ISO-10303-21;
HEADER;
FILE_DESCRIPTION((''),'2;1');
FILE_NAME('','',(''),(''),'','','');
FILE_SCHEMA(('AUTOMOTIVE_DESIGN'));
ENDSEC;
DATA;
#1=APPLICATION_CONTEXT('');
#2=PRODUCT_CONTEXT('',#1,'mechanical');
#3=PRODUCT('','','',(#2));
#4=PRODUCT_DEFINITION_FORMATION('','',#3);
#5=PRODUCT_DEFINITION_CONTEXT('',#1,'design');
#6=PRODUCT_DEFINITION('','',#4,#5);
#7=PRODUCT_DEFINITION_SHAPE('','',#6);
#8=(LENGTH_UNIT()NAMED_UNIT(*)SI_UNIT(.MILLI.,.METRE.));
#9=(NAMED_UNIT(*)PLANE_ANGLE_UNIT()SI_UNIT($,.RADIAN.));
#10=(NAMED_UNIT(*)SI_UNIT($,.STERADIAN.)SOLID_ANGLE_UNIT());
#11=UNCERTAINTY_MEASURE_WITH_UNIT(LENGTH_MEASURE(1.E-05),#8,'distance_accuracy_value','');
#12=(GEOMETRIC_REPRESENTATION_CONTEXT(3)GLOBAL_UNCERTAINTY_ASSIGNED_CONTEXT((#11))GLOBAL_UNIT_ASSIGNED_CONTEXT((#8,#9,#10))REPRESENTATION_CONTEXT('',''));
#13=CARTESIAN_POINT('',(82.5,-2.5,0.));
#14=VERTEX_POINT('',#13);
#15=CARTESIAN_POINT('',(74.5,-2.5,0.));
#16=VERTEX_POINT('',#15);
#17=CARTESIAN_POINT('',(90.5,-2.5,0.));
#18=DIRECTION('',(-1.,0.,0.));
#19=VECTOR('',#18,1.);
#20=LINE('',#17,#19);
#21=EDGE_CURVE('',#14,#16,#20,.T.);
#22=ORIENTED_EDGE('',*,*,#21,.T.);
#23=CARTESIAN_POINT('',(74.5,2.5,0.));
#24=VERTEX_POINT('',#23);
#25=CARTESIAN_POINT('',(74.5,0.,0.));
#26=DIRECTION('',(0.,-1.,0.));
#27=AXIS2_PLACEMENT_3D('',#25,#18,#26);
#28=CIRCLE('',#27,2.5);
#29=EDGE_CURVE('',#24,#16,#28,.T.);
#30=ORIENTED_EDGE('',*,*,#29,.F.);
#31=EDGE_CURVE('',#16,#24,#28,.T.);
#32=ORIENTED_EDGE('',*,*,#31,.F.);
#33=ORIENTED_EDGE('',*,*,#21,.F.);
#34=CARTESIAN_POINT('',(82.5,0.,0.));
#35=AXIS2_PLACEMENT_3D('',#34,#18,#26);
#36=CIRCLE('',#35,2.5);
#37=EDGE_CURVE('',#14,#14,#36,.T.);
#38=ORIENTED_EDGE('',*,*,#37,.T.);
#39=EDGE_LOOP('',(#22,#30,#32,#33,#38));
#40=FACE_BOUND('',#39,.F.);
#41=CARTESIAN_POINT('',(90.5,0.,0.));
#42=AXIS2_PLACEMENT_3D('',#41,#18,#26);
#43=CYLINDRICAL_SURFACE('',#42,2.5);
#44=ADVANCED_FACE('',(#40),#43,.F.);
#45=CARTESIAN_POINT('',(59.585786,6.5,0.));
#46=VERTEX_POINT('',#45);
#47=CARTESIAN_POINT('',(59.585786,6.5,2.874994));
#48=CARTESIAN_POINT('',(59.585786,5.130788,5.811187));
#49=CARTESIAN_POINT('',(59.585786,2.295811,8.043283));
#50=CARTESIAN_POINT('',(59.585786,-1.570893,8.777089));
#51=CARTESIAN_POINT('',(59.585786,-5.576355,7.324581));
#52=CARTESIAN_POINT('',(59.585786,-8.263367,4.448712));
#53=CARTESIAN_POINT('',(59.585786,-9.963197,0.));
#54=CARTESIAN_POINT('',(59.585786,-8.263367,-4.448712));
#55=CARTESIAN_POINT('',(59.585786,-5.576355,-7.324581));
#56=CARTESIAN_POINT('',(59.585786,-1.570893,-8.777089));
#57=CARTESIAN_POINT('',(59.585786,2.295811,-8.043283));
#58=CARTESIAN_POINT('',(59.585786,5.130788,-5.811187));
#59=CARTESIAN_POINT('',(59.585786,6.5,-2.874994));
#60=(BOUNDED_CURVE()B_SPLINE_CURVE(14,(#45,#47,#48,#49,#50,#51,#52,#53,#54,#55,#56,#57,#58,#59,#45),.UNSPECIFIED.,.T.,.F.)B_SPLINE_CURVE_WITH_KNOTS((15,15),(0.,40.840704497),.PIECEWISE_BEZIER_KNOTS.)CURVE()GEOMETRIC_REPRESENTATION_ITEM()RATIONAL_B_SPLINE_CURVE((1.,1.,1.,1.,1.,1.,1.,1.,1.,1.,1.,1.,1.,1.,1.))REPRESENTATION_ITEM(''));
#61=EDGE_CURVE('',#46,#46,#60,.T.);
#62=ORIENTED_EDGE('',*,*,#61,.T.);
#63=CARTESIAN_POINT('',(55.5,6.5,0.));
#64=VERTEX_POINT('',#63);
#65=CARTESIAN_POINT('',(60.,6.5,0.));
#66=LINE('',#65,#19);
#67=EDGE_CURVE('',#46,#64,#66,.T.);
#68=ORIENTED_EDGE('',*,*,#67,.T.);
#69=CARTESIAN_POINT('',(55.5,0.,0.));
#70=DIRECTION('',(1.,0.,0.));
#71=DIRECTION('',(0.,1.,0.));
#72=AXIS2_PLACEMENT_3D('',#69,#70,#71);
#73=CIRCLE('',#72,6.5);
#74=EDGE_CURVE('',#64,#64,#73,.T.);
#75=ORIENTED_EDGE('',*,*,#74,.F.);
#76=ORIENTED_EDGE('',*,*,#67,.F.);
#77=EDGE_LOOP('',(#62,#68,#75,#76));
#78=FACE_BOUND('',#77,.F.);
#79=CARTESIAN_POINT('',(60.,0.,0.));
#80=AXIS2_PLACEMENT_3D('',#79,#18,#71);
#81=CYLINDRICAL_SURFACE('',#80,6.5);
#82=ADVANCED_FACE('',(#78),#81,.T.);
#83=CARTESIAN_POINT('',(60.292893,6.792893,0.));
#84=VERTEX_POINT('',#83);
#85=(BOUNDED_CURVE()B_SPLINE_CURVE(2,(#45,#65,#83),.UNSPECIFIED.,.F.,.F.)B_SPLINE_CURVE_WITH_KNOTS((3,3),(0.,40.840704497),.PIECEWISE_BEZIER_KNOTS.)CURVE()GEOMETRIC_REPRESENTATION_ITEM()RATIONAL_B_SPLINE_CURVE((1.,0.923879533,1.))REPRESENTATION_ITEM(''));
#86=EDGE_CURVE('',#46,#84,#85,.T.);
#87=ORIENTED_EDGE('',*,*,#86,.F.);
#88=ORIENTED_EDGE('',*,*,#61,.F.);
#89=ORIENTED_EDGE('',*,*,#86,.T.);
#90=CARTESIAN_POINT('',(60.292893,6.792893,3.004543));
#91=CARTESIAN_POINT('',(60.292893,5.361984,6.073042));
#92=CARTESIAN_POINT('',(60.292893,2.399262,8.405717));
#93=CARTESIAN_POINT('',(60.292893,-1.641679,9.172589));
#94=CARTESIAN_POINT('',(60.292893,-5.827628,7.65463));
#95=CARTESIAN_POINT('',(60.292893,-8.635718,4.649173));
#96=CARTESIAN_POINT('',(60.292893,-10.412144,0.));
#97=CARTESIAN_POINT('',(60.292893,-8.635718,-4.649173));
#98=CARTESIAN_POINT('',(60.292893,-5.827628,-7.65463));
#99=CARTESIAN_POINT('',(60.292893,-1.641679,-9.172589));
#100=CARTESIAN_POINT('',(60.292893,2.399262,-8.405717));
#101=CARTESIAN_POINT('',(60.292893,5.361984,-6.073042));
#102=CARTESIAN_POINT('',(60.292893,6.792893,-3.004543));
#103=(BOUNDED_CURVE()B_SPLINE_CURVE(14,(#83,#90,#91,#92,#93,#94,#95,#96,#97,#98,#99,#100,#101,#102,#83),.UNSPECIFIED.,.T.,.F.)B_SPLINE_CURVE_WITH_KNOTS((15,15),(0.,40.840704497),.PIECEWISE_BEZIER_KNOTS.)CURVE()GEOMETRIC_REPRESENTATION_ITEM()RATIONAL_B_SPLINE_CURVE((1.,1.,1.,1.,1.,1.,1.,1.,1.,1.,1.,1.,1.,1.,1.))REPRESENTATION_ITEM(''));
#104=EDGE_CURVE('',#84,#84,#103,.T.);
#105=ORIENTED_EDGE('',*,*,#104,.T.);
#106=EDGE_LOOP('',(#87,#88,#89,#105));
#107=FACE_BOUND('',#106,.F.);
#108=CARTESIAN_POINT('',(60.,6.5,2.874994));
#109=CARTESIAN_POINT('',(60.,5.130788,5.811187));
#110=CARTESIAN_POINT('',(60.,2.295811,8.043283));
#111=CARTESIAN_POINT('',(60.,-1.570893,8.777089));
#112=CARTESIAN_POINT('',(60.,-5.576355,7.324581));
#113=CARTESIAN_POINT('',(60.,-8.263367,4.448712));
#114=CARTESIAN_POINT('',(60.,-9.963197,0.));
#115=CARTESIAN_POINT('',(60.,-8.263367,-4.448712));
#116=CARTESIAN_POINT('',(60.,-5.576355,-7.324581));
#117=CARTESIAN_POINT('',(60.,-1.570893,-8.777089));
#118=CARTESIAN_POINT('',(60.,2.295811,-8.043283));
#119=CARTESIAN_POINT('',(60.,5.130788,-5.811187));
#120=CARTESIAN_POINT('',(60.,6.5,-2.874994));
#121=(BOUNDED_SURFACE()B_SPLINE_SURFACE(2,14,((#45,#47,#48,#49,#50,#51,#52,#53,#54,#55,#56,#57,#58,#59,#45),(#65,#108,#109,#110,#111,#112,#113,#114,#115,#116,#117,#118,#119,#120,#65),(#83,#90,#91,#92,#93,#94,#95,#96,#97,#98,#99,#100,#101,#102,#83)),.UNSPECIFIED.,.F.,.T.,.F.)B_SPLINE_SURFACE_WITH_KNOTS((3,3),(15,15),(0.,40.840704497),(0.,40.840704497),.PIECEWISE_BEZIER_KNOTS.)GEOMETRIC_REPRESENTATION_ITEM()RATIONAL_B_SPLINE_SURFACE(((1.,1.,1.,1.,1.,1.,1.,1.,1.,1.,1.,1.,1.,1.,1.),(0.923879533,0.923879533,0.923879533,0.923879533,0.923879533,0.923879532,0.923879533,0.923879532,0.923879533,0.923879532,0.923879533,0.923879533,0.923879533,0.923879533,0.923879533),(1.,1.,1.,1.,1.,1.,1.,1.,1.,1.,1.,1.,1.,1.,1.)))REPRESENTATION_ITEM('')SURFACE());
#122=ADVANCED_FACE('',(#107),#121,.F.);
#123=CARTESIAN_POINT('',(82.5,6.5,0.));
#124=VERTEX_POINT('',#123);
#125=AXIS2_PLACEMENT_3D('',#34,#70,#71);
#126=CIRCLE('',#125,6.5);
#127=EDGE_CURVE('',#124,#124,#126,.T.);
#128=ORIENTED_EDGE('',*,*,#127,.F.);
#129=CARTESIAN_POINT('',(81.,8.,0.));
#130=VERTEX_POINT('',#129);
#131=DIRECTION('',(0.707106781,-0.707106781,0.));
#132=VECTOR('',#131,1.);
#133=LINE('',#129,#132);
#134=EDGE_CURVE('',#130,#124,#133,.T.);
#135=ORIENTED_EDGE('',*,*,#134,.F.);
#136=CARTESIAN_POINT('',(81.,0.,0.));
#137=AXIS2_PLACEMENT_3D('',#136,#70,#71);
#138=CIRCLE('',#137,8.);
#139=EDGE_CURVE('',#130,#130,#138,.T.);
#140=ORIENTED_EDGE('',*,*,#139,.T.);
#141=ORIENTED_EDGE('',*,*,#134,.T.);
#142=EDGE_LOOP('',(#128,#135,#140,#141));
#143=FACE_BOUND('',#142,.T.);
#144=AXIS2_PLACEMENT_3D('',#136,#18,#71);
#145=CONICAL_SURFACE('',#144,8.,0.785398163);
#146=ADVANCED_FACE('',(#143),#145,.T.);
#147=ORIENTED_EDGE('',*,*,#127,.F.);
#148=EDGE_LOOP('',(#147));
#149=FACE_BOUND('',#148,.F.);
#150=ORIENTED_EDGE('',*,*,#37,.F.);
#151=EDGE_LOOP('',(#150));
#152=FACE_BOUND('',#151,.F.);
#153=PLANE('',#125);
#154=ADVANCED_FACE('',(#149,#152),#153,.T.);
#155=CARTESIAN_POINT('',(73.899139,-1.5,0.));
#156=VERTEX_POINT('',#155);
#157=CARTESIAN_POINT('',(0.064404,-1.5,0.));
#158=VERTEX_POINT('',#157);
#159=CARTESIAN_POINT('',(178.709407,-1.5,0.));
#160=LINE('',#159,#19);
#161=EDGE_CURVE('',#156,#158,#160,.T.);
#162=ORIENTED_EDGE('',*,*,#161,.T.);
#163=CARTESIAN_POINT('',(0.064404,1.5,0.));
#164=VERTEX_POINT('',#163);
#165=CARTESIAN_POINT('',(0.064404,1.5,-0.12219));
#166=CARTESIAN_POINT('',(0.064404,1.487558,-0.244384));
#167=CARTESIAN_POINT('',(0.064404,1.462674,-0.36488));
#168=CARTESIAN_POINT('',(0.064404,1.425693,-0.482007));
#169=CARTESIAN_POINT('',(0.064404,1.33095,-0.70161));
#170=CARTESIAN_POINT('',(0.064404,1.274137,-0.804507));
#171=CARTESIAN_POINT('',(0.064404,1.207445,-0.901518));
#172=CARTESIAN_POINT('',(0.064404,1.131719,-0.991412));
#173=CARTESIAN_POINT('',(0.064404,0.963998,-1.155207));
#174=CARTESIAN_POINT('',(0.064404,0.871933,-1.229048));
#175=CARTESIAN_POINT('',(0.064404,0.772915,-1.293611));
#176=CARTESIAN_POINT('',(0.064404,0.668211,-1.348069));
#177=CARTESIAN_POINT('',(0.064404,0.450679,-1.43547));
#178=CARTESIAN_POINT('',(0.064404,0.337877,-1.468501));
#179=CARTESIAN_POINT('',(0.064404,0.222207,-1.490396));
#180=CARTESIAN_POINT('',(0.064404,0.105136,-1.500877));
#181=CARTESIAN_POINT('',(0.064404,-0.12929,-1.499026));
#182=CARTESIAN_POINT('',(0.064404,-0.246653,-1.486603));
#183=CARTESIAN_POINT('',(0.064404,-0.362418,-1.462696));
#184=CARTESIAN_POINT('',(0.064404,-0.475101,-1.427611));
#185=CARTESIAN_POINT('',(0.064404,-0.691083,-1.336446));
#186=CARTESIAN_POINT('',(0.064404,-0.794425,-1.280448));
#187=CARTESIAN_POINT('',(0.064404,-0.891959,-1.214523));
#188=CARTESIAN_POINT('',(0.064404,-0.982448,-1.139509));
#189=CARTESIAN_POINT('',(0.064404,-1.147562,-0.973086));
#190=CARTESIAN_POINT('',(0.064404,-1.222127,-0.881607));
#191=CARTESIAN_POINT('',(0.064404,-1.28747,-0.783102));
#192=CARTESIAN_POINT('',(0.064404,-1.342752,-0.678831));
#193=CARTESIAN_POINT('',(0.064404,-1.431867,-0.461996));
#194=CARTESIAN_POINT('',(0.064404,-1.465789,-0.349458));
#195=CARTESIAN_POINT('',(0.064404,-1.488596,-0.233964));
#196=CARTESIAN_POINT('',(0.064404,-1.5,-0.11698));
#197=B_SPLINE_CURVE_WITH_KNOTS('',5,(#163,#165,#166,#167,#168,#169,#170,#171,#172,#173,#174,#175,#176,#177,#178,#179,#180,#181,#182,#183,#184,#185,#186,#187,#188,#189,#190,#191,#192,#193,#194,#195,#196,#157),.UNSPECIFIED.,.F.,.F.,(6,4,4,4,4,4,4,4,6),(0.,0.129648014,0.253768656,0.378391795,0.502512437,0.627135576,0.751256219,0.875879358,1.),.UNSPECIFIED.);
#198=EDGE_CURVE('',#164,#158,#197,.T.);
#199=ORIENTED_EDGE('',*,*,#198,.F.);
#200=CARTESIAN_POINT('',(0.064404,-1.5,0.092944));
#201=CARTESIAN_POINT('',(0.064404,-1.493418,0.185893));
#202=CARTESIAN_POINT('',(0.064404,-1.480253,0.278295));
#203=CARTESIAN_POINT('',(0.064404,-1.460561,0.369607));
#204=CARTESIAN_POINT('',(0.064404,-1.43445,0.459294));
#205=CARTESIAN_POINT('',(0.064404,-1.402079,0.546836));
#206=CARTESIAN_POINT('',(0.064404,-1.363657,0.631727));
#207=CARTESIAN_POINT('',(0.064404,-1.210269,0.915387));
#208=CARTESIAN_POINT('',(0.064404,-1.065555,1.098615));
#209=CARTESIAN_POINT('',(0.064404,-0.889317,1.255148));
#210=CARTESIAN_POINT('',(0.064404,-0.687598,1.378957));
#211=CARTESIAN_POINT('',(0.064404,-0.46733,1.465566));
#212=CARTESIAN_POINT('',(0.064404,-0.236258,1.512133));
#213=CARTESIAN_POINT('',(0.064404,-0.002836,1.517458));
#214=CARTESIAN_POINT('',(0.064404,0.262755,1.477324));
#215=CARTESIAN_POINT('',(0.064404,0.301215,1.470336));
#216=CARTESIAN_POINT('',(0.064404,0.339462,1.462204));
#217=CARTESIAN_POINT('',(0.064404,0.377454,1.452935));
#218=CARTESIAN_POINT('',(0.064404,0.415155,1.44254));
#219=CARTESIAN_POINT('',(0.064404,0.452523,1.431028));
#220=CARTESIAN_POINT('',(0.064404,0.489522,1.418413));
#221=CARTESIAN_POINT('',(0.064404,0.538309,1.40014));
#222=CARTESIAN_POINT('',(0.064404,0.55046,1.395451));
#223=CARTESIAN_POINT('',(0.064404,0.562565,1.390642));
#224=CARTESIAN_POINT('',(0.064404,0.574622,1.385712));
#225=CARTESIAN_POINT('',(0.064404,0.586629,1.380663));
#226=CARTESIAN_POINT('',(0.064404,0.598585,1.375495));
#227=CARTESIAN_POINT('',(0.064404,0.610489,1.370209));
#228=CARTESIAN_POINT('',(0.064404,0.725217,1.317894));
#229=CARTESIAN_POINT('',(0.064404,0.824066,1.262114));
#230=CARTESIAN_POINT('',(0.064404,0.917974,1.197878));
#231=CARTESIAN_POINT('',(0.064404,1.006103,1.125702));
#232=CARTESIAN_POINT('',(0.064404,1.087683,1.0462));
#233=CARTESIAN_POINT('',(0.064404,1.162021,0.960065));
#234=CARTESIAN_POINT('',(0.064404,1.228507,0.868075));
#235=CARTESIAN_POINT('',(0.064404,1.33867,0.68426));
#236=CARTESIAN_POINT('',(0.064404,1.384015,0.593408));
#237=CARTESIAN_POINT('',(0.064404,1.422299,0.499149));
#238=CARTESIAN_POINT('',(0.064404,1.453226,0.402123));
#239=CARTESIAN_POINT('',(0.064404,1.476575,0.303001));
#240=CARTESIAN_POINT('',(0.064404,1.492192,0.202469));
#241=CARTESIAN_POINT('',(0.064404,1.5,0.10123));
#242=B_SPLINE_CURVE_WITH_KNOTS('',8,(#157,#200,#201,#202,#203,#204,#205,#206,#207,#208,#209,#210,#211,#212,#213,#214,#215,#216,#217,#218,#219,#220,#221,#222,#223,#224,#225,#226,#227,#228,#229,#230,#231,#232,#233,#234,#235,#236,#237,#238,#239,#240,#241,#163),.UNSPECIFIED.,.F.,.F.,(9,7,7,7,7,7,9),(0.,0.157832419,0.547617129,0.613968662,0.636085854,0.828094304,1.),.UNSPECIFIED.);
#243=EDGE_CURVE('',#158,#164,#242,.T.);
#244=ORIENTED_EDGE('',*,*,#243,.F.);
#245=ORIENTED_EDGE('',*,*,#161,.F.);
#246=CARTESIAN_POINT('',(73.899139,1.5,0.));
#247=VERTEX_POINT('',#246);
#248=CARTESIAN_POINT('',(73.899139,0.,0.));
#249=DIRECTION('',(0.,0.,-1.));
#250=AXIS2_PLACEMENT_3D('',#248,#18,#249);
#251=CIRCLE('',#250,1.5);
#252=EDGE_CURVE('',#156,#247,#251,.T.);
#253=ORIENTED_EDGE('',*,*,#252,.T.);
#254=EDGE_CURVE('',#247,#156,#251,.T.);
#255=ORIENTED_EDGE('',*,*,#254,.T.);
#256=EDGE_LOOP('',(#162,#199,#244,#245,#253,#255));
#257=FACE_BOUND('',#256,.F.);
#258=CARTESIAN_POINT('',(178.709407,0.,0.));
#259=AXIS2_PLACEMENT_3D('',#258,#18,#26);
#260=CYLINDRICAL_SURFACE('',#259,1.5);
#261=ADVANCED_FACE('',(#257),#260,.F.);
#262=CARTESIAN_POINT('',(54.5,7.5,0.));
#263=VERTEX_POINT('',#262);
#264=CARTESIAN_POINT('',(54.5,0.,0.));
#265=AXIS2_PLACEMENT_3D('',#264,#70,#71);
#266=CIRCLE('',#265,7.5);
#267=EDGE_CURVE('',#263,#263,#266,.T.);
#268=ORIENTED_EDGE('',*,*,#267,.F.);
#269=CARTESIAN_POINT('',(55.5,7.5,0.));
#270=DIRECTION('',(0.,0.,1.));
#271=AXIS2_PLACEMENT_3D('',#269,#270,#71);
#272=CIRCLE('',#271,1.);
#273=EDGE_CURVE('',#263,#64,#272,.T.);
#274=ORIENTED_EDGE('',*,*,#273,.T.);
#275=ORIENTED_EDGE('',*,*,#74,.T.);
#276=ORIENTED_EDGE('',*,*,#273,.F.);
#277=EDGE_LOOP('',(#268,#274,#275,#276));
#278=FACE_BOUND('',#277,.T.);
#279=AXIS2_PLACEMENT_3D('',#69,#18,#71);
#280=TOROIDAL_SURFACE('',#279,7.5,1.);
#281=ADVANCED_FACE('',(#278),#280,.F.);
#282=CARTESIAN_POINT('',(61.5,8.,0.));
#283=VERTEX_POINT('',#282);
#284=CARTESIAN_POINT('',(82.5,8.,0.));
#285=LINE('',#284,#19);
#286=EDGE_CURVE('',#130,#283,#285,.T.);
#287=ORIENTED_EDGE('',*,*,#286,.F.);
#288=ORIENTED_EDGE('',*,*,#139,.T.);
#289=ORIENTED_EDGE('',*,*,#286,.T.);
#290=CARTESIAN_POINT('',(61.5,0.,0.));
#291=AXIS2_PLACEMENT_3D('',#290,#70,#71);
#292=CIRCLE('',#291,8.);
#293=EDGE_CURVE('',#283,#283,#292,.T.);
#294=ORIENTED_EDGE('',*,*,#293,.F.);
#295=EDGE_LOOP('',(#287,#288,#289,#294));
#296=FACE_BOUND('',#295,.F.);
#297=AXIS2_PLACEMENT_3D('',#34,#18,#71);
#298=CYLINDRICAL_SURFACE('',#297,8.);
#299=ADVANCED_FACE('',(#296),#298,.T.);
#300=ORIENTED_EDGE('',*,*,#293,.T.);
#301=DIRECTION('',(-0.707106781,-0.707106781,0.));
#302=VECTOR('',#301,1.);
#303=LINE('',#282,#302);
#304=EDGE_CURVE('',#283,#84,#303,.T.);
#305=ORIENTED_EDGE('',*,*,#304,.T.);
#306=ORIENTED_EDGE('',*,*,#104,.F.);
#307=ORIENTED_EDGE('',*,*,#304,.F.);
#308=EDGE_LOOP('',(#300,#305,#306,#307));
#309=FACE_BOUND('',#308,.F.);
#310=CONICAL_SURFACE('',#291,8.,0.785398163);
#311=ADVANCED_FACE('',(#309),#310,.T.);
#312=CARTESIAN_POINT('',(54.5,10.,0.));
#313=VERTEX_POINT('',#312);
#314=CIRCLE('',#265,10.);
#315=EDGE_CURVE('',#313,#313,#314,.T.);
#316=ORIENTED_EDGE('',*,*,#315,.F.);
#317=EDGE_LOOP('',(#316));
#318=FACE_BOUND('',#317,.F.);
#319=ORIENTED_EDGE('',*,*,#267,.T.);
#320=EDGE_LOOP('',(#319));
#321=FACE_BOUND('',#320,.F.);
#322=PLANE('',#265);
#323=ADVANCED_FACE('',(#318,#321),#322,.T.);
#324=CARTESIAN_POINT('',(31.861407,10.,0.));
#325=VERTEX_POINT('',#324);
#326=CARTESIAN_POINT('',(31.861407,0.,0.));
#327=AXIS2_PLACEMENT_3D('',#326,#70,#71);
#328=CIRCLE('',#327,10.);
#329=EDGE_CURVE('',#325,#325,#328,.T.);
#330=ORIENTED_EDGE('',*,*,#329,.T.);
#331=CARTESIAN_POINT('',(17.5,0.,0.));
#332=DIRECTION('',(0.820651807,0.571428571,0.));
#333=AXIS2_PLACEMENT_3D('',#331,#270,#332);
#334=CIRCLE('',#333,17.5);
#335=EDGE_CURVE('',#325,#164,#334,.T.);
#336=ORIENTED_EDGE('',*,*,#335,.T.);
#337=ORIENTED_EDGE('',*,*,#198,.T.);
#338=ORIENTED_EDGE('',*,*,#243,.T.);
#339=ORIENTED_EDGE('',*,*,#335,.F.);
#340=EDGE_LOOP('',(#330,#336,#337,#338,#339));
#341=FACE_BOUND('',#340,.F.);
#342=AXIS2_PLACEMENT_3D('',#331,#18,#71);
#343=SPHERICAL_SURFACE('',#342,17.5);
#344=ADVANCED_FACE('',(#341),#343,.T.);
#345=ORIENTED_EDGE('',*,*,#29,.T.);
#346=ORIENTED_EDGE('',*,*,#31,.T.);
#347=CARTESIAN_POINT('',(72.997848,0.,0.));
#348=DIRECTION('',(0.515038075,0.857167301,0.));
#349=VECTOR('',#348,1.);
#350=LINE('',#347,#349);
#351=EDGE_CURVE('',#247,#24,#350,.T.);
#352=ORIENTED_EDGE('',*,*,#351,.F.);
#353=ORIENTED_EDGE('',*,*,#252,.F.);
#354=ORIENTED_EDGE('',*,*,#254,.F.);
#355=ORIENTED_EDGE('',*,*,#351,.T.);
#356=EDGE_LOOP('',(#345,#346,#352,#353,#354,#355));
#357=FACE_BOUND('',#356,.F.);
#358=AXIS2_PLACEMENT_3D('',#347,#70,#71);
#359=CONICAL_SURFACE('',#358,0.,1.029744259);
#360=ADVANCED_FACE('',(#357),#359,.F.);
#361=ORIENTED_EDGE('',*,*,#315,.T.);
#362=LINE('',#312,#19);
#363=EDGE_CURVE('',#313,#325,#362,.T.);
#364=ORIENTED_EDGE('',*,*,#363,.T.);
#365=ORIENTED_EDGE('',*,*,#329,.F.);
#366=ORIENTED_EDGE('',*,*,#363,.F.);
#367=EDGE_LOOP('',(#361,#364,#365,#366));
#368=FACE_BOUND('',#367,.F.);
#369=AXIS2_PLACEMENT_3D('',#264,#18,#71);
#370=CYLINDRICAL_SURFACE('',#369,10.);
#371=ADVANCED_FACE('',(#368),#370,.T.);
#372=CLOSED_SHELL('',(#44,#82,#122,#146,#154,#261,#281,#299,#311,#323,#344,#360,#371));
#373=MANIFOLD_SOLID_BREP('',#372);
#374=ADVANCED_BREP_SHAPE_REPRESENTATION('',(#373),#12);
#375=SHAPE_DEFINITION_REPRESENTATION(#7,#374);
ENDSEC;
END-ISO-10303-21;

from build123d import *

# Parameters (mm, degrees)
F3_D     = 5
F3_DEPTH = 8
F3_TIP   = 1.5021515476
F4_D     = 3
F5_R     = 1
F6_SIZE  = 1.5


with BuildPart() as f1:
    # F0 (on Top) → F1 (revolve)
    with BuildSketch(Plane.XY):
        with BuildLine():
            ThreePointArc((31.8614066163, 10), (12.2595141345, 16.6969251029), (0, 0))
            Line((0, 0), (82.5, 0))
            Line((82.5, 0), (82.5, 8))
            Line((82.5, 8), (61.5, 8))
            Line((61.5, 8), (60, 6.5))
            Line((60, 6.5), (54.5, 6.5))
            Line((54.5, 6.5), (54.5, 10))
            Line((54.5, 10), (31.8614066163, 10))
        make_face()
    revolve(axis=Axis((41.25, 0, 0), (1, 0, 0)))

    # F3
    with Locations(Plane.YZ.offset(82.5)):
        with Locations((0, 0)):
            Hole(F3_D / 2, depth=F3_DEPTH)
            with Locations((0, 0, -(F3_DEPTH + F3_TIP / 2))):  # 118° drill point
                Cone(0, F3_D / 2, F3_TIP, mode=Mode.SUBTRACT)

    # F4 (through all)
    with Locations(Plane.YZ.offset(82.5)):
        with Locations((0, 0)):
            Hole(F4_D / 2)

    # F5
    f5_edges = [f1.edges().sort_by_distance(p)[0] for p in [
        (54.5, -6.5, 0),
        (60, -6.5, 0),
    ]]
    fillet(f5_edges, radius=F5_R)

    # F6
    f6_edges = [f1.edges().sort_by_distance(p)[0] for p in [
        (82.5, -8, 0),
    ]]
    chamfer(f6_edges, length=F6_SIZE)


solid = f1.part
